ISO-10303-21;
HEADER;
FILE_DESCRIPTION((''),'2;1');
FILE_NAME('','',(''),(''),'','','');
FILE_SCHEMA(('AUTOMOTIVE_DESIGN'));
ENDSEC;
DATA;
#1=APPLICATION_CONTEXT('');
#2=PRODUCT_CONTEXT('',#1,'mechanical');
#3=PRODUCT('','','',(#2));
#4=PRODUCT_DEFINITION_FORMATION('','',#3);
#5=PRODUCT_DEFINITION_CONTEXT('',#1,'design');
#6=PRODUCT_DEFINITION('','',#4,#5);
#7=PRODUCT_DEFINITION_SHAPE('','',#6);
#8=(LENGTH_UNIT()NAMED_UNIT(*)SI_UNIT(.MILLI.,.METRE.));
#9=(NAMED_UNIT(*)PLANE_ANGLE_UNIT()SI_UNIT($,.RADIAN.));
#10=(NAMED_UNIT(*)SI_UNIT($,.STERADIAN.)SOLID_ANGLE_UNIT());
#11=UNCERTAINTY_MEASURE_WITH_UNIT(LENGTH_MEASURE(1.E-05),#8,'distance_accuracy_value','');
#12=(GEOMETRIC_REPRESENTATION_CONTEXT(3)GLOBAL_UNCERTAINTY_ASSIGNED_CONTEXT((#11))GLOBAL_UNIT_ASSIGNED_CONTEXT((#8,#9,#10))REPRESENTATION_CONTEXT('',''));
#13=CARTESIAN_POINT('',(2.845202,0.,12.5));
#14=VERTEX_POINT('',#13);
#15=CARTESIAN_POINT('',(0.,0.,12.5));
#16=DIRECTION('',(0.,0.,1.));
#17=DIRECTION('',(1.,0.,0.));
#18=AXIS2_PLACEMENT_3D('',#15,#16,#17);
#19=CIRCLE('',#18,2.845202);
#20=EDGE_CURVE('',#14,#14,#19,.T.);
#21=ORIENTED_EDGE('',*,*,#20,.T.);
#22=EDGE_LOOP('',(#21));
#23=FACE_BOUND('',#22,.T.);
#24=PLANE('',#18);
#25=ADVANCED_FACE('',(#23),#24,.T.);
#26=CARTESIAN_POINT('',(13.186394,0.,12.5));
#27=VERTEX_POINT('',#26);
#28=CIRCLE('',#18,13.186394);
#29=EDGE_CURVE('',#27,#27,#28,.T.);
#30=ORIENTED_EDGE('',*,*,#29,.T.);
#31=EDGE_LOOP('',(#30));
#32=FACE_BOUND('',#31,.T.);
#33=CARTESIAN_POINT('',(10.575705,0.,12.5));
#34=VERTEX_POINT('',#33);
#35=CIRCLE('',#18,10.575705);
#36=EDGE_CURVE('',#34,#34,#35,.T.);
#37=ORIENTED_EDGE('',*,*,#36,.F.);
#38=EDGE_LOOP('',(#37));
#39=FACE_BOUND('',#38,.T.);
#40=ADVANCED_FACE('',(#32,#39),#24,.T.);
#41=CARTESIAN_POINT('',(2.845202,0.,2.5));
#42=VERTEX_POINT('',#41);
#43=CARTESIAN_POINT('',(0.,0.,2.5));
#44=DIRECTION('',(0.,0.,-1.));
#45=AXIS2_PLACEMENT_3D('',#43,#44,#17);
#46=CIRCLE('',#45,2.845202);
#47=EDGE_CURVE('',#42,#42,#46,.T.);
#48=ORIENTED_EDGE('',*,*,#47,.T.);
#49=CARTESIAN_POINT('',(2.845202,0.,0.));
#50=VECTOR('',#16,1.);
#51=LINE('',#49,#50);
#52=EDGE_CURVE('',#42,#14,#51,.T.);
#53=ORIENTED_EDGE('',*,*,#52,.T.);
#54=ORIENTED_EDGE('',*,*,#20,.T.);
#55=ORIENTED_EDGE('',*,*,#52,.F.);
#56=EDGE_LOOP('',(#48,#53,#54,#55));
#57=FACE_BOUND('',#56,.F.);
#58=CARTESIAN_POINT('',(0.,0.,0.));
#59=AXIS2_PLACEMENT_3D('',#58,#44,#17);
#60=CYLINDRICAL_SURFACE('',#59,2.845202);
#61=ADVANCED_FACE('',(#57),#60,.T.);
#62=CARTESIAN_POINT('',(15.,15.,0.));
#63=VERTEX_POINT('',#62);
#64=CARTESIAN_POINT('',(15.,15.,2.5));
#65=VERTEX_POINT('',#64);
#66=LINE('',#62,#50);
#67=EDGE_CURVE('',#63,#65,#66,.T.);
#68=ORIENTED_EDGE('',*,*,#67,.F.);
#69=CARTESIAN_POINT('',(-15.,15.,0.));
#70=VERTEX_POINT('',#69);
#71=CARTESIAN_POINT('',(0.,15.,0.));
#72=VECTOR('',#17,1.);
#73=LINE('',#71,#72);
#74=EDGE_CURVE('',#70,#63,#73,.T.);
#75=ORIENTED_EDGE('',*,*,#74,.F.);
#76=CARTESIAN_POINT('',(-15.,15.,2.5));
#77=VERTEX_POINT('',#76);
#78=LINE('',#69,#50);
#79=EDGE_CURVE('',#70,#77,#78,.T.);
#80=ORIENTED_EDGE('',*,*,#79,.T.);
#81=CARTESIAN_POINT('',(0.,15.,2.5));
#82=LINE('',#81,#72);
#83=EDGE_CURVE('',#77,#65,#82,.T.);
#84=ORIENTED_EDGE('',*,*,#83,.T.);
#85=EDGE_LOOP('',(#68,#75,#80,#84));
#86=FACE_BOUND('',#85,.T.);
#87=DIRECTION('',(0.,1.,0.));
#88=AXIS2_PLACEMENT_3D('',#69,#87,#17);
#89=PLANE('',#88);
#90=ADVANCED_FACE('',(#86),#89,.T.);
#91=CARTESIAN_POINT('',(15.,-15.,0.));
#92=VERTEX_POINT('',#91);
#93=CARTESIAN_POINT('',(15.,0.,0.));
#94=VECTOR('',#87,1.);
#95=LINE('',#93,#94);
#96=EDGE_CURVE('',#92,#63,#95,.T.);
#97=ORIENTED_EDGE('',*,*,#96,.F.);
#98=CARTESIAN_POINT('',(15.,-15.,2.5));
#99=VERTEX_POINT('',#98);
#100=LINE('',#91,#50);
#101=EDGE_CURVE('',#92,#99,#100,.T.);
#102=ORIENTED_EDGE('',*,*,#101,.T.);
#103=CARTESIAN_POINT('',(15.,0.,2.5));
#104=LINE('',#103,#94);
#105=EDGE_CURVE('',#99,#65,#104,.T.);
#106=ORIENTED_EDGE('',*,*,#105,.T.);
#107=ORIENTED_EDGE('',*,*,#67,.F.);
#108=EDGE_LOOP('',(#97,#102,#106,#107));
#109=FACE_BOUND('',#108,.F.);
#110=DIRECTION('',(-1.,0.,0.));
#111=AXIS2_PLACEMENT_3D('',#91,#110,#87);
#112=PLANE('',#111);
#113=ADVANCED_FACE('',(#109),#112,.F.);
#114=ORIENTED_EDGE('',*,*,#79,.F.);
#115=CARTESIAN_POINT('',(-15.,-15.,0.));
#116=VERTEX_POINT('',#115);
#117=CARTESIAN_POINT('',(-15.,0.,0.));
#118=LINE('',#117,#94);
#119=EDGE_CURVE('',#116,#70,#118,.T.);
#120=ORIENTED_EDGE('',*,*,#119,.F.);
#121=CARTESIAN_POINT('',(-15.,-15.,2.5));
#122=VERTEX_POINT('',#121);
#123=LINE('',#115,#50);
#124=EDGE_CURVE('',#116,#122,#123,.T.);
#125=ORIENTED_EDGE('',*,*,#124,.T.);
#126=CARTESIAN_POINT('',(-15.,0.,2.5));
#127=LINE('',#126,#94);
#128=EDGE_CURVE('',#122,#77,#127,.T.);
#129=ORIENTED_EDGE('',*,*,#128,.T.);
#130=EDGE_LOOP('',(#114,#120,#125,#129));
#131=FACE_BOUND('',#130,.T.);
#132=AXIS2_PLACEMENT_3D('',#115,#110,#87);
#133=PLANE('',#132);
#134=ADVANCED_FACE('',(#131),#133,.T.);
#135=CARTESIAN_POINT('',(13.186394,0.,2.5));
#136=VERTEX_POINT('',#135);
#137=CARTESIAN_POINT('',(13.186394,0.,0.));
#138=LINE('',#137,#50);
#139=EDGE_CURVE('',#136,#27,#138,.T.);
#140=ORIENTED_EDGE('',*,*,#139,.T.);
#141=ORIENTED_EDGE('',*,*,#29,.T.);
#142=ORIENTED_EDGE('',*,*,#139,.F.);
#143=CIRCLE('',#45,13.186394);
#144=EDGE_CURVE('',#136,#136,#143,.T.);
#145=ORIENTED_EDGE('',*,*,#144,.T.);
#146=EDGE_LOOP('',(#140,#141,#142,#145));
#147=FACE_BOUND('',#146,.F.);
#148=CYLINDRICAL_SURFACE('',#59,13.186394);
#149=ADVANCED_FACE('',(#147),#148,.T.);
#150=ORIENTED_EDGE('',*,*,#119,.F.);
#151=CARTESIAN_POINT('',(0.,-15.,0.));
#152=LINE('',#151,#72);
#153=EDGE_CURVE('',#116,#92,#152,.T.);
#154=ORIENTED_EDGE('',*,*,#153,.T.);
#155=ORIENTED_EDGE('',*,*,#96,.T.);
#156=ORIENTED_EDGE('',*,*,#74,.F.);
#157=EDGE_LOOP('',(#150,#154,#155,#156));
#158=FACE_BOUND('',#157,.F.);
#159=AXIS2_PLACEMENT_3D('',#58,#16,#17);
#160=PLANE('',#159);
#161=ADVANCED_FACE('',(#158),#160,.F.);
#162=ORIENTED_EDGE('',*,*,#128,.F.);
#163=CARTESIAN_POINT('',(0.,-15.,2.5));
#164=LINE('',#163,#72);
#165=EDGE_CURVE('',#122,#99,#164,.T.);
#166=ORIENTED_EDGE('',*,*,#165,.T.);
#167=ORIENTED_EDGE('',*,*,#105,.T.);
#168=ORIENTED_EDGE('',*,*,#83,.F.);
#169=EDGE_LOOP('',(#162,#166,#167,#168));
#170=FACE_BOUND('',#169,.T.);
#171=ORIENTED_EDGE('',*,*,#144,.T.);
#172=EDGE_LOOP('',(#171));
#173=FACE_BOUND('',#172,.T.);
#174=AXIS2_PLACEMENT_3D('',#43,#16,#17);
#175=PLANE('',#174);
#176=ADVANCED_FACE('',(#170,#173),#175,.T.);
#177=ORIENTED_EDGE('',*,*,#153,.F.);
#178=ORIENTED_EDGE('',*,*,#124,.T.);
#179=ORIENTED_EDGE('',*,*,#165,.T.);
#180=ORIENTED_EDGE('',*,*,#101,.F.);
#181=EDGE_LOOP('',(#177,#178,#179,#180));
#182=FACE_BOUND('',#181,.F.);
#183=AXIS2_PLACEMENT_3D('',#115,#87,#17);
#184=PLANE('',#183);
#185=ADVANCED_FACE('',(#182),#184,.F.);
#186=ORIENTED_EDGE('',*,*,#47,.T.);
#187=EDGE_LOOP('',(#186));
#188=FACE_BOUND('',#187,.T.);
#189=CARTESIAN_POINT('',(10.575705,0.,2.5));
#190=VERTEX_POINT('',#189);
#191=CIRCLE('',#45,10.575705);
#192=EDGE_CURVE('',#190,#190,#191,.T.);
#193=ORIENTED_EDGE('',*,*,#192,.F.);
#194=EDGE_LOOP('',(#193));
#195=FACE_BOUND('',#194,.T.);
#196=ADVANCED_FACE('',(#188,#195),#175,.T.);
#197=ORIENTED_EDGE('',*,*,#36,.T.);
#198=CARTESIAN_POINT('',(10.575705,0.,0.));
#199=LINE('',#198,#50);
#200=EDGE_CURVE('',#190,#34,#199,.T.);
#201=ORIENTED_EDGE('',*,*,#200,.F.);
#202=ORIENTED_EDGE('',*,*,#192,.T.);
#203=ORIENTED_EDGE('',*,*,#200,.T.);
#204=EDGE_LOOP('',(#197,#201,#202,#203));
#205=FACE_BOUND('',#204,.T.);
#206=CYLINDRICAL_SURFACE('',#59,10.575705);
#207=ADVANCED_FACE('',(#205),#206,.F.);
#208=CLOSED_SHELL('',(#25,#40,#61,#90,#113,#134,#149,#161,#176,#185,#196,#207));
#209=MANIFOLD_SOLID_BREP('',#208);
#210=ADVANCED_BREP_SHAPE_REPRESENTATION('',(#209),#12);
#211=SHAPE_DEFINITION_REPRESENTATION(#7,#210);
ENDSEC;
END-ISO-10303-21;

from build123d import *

# Parameters (mm, degrees)
F0_W     = 30
F0_H     = 30
F1_DEPTH = 2.5
F2_R     = 2.8452020341
F3_DEPTH = 12.5
F4_R     = 13.1863944163
F4_R_2   = 10.5757052103
F5_DEPTH = 12.5


# Not quite as in the source:
# - a feature names something its author has since deleted; it is built from what else it names


with BuildPart() as f1:
    # F0 (on Top) → F1 (new body)
    with BuildSketch(Plane.XY):
        Rectangle(F0_W, F0_H)
    extrude(amount=F1_DEPTH)

    # F2 (on Top) → F3 (join)
    with BuildSketch(Plane.XY):
        Circle(F2_R)
    extrude(amount=F3_DEPTH)

    # F4 (on Top) → F5 (join)
    with BuildSketch(Plane.XY):
        Circle(F4_R)
        Circle(F4_R_2, mode=Mode.SUBTRACT)
    extrude(amount=F5_DEPTH)


solid = f1.part
